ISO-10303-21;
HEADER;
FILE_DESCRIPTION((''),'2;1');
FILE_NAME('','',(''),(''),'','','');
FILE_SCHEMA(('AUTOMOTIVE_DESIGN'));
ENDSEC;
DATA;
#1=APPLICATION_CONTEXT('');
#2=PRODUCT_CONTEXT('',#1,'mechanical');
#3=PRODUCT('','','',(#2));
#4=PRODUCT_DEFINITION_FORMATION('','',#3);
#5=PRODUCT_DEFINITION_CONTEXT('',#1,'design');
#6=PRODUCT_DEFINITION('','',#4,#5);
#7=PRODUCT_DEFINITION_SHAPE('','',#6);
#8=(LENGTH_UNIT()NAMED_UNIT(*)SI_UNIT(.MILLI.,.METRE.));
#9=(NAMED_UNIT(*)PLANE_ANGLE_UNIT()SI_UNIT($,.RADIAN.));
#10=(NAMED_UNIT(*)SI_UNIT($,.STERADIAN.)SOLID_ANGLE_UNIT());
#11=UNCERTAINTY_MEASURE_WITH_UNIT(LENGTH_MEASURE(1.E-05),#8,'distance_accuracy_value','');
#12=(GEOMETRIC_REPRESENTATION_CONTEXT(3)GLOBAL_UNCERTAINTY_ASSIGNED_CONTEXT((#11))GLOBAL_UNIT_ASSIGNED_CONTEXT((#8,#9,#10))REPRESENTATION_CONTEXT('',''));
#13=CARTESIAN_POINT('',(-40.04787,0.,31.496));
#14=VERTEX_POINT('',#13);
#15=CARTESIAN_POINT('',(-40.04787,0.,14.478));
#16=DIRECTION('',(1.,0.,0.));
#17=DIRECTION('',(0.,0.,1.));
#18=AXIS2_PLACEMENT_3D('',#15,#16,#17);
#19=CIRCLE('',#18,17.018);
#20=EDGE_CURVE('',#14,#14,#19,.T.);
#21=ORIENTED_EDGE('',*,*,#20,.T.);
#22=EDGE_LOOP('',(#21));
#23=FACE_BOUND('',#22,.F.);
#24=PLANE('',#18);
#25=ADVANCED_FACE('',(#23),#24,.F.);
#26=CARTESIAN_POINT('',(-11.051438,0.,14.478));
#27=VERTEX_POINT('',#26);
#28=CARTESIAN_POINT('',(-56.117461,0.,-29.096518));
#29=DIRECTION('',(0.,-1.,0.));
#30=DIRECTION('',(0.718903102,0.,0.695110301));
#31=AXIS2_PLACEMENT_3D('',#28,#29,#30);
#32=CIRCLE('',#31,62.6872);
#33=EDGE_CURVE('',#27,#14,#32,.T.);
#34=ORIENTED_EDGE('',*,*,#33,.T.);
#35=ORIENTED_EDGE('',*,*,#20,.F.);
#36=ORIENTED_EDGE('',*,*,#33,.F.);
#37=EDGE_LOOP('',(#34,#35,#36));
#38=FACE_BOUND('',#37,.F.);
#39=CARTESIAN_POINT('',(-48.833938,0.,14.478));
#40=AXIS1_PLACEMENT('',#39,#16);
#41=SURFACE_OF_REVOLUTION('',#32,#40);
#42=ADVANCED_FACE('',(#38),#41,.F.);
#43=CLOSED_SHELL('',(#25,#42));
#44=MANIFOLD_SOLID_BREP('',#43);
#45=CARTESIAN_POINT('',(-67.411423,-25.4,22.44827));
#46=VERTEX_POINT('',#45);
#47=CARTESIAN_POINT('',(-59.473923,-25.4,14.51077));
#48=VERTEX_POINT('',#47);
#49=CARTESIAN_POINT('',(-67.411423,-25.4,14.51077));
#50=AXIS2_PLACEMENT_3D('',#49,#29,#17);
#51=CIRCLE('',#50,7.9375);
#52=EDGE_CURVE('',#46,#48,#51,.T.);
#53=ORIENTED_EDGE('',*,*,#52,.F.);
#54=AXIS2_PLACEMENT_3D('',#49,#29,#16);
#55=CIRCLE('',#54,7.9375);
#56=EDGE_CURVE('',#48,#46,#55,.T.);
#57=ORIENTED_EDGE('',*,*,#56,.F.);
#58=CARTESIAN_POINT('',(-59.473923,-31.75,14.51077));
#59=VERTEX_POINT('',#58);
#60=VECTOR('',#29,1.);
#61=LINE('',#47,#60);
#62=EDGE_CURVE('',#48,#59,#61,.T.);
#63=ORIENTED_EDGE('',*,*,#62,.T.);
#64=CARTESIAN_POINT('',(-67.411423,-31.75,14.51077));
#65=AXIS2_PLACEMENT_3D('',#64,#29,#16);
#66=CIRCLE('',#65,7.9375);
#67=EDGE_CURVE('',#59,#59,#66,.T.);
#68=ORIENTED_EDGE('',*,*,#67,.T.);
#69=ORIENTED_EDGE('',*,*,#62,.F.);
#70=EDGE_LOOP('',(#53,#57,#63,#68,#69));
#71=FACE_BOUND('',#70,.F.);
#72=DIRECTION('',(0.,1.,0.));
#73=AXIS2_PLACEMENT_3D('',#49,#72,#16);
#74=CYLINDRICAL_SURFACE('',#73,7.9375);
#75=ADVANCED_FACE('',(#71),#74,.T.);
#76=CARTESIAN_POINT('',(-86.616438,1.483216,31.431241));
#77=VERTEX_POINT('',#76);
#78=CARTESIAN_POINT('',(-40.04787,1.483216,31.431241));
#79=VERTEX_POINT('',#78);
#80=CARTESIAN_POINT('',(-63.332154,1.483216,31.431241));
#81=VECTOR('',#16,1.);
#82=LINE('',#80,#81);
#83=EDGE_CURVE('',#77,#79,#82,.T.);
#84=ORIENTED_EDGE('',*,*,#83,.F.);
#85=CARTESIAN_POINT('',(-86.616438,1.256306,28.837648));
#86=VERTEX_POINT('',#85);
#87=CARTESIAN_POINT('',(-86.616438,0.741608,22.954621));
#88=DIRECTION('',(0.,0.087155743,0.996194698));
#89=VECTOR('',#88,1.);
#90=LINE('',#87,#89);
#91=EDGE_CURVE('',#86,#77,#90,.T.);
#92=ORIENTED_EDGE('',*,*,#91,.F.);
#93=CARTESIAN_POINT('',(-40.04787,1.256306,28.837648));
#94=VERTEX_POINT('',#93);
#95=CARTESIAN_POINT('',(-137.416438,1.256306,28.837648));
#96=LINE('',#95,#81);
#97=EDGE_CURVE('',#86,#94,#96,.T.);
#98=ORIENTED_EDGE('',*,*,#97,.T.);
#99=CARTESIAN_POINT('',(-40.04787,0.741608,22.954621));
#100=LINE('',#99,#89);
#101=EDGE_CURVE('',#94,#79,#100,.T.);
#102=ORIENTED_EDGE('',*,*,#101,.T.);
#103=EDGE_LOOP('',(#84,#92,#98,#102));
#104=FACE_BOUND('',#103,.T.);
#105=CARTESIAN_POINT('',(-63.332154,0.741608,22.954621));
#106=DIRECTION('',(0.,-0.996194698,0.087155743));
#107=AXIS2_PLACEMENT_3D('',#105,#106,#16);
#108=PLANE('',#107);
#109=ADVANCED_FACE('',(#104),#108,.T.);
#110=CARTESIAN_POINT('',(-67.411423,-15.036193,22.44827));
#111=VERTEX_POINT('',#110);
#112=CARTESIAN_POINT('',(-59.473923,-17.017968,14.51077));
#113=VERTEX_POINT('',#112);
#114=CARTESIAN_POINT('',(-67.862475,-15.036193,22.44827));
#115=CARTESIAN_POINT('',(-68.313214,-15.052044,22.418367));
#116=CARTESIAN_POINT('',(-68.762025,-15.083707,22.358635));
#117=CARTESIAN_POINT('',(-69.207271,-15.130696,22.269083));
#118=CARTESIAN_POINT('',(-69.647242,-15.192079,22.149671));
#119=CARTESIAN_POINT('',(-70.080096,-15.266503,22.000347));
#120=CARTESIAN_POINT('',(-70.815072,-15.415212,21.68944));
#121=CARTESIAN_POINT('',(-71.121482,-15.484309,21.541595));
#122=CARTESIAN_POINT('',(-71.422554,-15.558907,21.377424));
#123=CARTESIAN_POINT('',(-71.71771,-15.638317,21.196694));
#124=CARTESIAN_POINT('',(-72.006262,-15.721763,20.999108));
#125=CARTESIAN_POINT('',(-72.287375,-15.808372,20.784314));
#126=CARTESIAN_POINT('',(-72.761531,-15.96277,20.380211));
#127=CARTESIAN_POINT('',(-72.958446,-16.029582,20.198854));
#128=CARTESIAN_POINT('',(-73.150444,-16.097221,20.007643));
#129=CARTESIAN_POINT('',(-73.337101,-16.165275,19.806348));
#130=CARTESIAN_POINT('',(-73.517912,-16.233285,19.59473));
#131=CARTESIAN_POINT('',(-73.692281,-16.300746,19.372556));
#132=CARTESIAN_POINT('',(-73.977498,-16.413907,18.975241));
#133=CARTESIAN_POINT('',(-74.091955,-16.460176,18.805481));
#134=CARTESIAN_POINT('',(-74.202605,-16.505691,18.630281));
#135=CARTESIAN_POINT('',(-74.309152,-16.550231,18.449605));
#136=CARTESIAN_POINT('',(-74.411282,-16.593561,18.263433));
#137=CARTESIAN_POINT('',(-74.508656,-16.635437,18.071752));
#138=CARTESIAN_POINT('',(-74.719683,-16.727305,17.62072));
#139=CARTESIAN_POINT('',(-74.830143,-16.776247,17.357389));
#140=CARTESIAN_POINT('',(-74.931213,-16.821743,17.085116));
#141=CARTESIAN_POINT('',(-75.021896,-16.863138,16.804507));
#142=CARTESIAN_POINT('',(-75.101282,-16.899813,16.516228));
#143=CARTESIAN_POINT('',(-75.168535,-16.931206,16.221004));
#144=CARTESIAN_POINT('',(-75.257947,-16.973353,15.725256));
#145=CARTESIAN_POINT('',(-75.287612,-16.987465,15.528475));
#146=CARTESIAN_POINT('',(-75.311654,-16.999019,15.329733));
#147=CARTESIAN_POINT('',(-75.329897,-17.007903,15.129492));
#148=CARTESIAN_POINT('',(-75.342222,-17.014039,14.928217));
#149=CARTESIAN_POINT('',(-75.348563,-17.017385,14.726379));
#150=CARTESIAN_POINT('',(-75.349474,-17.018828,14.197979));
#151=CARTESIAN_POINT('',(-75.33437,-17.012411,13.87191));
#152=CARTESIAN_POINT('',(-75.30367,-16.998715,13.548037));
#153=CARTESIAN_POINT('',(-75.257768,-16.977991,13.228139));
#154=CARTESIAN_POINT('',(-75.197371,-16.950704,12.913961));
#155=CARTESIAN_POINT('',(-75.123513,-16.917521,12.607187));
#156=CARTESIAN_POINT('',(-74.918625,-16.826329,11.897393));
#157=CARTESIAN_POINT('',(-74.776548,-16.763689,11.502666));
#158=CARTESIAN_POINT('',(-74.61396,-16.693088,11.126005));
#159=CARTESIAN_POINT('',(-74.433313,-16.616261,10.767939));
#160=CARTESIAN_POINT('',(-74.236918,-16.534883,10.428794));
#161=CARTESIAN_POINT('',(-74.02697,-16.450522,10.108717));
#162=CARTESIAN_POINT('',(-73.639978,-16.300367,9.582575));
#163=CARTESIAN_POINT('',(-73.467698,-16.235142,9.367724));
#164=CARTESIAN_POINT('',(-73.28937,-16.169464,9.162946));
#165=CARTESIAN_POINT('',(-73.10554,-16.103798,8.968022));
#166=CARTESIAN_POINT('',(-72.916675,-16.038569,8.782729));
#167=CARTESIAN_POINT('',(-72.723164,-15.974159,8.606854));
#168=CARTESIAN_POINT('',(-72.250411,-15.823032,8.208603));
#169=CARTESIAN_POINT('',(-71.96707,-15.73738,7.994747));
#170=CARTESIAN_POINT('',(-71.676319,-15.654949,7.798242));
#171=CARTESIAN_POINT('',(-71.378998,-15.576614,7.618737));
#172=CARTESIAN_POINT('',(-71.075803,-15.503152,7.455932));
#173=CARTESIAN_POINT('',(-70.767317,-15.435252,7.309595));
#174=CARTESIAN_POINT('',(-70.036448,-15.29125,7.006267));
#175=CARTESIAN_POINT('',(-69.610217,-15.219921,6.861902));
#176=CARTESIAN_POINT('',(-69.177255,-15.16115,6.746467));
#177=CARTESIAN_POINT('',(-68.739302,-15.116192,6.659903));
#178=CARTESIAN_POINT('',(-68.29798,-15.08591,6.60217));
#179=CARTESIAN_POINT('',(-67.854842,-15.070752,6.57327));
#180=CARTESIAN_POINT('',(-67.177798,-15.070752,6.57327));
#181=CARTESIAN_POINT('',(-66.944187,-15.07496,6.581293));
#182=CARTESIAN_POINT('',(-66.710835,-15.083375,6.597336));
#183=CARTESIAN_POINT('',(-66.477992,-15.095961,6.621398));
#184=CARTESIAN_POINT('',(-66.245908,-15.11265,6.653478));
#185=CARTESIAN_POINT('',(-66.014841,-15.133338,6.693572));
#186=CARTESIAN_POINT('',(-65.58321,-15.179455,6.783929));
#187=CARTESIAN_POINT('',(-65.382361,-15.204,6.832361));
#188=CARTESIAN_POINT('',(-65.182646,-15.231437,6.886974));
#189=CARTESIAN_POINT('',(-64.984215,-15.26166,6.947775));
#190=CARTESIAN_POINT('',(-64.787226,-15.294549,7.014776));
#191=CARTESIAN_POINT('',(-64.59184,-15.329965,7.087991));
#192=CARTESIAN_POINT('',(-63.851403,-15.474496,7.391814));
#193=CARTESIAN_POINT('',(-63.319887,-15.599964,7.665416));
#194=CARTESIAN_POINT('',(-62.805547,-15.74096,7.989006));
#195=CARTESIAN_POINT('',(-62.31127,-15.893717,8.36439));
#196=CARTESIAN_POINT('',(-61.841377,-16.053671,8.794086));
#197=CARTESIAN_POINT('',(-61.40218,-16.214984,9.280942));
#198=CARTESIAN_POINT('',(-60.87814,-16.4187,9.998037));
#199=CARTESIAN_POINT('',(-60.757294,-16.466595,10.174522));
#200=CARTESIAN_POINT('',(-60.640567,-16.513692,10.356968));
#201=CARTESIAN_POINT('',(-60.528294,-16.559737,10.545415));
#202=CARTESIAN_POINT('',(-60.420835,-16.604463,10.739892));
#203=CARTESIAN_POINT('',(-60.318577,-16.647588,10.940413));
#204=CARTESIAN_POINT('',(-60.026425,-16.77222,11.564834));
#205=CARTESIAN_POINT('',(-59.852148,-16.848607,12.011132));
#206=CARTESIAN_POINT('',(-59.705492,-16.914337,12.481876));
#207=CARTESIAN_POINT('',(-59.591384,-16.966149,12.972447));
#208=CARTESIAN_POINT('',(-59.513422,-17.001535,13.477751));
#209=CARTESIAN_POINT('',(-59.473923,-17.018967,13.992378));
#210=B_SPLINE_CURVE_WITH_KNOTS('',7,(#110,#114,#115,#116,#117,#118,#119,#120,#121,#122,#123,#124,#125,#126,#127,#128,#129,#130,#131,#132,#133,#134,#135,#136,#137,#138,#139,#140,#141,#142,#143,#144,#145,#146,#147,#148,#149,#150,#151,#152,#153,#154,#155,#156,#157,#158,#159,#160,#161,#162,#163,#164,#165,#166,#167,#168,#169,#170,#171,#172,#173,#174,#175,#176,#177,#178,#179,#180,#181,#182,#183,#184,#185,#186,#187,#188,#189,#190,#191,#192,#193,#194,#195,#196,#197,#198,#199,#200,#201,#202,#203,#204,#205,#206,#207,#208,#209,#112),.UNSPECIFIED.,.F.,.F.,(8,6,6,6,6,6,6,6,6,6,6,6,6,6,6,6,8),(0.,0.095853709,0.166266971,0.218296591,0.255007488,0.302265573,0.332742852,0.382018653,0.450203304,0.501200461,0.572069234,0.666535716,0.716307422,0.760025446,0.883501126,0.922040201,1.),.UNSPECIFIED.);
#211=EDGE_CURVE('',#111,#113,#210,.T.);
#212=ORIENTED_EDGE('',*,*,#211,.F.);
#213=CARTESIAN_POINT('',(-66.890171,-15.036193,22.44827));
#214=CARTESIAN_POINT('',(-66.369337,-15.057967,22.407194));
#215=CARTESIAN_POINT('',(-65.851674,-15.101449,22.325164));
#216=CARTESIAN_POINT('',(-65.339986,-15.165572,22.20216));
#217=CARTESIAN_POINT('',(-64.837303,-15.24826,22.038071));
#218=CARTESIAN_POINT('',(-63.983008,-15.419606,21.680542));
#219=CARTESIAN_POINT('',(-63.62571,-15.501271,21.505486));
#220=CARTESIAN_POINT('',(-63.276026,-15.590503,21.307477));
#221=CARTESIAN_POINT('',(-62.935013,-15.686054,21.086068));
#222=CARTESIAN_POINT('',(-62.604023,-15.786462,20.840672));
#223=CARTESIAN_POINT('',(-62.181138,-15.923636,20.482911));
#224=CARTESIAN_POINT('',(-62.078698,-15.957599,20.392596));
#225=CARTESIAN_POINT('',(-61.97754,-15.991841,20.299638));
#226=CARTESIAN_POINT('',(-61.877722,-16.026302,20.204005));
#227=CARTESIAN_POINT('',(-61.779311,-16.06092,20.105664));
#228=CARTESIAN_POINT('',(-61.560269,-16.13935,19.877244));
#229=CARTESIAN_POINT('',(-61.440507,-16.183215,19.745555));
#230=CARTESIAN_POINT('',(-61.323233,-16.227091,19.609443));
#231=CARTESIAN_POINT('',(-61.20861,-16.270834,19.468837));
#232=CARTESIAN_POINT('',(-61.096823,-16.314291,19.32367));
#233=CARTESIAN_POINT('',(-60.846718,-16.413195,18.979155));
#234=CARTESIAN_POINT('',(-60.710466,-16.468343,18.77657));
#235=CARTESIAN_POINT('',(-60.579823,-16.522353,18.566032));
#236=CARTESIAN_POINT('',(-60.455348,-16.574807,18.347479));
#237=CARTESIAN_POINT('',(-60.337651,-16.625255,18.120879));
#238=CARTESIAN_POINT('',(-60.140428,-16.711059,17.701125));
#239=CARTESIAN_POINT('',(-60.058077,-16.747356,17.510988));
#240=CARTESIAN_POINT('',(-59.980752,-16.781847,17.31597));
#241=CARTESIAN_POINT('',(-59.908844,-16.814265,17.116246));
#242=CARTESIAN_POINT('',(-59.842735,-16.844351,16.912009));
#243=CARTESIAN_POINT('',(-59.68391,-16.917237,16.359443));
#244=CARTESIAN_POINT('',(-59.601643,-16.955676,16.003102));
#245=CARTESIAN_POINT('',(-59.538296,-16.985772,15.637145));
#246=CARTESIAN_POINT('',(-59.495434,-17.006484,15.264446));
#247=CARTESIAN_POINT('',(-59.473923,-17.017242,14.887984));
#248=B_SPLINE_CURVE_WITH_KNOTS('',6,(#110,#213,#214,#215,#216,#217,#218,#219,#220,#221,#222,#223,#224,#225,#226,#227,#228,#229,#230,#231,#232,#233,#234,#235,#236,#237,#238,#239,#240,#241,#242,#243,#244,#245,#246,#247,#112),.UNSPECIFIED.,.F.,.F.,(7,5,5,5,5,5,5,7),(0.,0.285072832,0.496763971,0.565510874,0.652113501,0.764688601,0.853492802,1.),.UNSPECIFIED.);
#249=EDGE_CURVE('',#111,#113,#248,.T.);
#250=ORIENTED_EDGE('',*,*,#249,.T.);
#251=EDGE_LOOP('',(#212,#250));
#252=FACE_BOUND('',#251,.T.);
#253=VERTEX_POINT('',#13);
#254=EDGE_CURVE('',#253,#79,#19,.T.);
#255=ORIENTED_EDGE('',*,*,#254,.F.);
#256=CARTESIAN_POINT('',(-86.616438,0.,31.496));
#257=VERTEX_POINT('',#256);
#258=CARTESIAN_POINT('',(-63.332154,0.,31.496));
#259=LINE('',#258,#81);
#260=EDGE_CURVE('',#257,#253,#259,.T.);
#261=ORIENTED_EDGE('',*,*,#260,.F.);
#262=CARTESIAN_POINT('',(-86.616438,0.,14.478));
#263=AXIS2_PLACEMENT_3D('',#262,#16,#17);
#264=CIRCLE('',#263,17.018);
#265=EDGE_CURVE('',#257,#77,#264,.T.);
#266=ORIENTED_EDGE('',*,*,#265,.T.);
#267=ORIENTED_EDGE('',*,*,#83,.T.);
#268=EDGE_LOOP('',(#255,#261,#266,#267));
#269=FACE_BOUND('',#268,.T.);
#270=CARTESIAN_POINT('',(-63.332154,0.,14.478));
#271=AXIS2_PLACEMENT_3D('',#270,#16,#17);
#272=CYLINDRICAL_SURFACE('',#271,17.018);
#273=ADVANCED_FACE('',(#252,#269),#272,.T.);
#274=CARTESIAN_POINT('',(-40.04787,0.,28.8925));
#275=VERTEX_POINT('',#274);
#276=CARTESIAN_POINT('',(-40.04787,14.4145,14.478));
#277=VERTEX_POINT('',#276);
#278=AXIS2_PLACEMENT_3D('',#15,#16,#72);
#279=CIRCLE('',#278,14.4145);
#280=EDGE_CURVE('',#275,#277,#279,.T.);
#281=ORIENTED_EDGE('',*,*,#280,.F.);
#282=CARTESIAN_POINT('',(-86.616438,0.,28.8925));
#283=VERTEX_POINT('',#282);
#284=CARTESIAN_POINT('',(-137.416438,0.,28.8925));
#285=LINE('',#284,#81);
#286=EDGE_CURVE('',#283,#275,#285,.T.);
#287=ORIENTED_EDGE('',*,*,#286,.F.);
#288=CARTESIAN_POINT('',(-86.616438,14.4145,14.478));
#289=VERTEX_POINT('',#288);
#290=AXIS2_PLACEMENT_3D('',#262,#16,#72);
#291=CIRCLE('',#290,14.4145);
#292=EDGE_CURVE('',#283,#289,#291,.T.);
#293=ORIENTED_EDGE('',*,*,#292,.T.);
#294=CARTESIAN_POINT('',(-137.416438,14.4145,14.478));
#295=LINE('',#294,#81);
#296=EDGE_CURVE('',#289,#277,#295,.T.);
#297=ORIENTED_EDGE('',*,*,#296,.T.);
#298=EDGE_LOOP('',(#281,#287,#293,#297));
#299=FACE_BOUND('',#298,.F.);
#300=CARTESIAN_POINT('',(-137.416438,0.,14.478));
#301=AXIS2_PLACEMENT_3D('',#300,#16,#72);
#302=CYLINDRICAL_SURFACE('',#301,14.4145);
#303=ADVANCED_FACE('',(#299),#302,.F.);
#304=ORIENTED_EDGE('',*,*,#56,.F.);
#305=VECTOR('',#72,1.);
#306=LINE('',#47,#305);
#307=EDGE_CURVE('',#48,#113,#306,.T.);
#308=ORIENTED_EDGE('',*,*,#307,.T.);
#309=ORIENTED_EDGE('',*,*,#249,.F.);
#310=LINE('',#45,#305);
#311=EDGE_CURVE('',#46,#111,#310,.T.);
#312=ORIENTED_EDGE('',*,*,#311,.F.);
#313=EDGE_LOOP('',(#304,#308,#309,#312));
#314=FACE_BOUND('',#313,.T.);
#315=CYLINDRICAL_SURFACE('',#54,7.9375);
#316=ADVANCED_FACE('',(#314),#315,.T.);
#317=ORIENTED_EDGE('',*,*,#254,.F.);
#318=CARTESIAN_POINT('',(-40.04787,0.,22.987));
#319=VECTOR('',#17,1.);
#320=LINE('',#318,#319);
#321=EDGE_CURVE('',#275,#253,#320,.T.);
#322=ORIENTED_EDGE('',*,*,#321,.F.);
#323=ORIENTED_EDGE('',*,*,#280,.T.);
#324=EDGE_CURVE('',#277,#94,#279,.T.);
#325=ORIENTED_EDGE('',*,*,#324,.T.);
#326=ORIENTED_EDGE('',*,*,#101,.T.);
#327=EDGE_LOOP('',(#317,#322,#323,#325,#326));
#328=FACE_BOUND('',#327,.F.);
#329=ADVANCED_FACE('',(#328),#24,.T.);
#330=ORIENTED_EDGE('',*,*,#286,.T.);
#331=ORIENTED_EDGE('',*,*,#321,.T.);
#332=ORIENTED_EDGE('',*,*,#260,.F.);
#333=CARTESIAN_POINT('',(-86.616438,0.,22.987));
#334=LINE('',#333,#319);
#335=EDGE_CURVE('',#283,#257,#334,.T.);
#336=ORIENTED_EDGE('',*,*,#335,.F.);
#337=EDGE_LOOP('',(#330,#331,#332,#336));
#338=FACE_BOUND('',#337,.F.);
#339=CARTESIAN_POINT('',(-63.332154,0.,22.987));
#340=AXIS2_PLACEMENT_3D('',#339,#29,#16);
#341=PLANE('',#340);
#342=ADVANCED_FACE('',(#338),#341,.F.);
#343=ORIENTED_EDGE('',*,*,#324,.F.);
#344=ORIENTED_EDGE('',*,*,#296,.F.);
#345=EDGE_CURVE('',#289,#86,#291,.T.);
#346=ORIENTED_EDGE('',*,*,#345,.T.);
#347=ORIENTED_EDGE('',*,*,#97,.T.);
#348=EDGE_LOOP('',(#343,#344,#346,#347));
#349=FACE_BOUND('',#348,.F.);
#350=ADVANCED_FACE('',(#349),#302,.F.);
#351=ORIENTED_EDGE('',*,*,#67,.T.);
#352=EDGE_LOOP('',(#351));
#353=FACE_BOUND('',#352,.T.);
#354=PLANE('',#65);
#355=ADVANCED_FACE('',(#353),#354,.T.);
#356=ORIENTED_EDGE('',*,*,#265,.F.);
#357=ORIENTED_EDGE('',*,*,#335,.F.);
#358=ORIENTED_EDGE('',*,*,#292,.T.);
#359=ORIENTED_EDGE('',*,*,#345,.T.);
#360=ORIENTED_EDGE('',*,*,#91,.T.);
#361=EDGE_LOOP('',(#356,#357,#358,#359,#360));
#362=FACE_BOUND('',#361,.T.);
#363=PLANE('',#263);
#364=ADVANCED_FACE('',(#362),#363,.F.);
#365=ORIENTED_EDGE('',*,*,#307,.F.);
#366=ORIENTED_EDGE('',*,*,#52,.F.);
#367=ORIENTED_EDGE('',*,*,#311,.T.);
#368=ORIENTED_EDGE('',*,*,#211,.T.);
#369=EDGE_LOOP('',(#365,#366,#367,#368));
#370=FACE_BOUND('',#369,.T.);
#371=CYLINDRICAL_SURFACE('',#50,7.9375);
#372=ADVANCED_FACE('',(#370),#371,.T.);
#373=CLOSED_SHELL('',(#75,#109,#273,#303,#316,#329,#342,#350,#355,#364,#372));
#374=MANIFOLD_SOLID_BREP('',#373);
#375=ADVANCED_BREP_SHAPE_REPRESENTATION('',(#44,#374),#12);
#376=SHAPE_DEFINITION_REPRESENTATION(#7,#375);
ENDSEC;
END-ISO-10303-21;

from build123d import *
from build123d import SkipClean  # not in build123d's __all__

# Parameters (mm, degrees)
F0_W     = 46.5685683415
F0_H     = 17.018
F1_ANGLE = 355
F3_D     = 28.829
F3_DEPTH = 50.8
F3_TIP   = 8.661105393
F8_R     = 7.9375
F9_DEPTH = 6.35


with BuildPart() as f1:
    # F0 (on Front) → F1 (revolve)
    with BuildSketch(Plane.XZ):
        with Locations((-63.3321542538, 22.987)):
            Rectangle(F0_W, F0_H)
    revolve(axis=Axis((-48.8339384246, 0, 14.478), (1, 0, 0)), revolution_arc=F1_ANGLE)

    # F3
    with Locations(Plane(origin=(-86.6164384246, 0, 0), x_dir=(0, -1, 0), z_dir=(-1, 0, 0))):
        with Locations((0, 14.478)):
            Hole(F3_D / 2, depth=F3_DEPTH)
            with Locations((0, 0, -(F3_DEPTH + F3_TIP / 2))):  # 118° drill point
                Cone(0, F3_D / 2, F3_TIP, mode=Mode.SUBTRACT)

    # F6 (on offset) → F7 (join, up to the next surface of F1)
    with BuildSketch(Plane.XZ.offset(25.4)):
        with BuildLine():
            Line((-67.4114227295, 14.5107703283), (-59.4739227295, 14.5107703283))
            ThreePointArc((-59.4739227295, 14.5107703283), (-61.7987626538, 20.123430404), (-67.4114227295, 22.4482703283))
            Line((-67.4114227295, 22.4482703283), (-67.4114227295, 14.5107703283))
        make_face()
        with BuildLine():
            ThreePointArc((-67.4114227295, 22.4482703283), (-73.0240828052, 8.8981102527), (-59.4739227295, 14.5107703283))
            Line((-59.4739227295, 14.5107703283), (-67.4114227295, 14.5107703283))
            Line((-67.4114227295, 14.5107703283), (-67.4114227295, 22.4482703283))
        make_face()
    extrude(until=Until.NEXT, dir=(0, 1, 0))

    # F8 (on face) → F9 (join)
    with BuildSketch(Plane.XZ.offset(25.4)):
        with Locations((-67.4114227295, 14.5107703283)):
            Circle(F8_R)
    with SkipClean():  # cleaning this boolean's faces spoils the solid; the shape is the same uncleaned
        extrude(amount=F9_DEPTH)


with BuildPart() as f4:
    # F0 (on Front) → F4 (revolve)
    with BuildSketch(Plane.XZ):
        with BuildLine():
            ThreePointArc((-11.0514384246, 14.478), (-24.3874453928, 24.9672508998), (-40.0478700831, 31.496))
            Line((-40.0478700831, 31.496), (-40.0478700831, 14.478))
            Line((-40.0478700831, 14.478), (-11.0514384246, 14.478))
        make_face()
    revolve(axis=Axis((-48.8339384246, 0, 14.478), (1, 0, 0)))


solid = Compound([f1.part, f4.part])
